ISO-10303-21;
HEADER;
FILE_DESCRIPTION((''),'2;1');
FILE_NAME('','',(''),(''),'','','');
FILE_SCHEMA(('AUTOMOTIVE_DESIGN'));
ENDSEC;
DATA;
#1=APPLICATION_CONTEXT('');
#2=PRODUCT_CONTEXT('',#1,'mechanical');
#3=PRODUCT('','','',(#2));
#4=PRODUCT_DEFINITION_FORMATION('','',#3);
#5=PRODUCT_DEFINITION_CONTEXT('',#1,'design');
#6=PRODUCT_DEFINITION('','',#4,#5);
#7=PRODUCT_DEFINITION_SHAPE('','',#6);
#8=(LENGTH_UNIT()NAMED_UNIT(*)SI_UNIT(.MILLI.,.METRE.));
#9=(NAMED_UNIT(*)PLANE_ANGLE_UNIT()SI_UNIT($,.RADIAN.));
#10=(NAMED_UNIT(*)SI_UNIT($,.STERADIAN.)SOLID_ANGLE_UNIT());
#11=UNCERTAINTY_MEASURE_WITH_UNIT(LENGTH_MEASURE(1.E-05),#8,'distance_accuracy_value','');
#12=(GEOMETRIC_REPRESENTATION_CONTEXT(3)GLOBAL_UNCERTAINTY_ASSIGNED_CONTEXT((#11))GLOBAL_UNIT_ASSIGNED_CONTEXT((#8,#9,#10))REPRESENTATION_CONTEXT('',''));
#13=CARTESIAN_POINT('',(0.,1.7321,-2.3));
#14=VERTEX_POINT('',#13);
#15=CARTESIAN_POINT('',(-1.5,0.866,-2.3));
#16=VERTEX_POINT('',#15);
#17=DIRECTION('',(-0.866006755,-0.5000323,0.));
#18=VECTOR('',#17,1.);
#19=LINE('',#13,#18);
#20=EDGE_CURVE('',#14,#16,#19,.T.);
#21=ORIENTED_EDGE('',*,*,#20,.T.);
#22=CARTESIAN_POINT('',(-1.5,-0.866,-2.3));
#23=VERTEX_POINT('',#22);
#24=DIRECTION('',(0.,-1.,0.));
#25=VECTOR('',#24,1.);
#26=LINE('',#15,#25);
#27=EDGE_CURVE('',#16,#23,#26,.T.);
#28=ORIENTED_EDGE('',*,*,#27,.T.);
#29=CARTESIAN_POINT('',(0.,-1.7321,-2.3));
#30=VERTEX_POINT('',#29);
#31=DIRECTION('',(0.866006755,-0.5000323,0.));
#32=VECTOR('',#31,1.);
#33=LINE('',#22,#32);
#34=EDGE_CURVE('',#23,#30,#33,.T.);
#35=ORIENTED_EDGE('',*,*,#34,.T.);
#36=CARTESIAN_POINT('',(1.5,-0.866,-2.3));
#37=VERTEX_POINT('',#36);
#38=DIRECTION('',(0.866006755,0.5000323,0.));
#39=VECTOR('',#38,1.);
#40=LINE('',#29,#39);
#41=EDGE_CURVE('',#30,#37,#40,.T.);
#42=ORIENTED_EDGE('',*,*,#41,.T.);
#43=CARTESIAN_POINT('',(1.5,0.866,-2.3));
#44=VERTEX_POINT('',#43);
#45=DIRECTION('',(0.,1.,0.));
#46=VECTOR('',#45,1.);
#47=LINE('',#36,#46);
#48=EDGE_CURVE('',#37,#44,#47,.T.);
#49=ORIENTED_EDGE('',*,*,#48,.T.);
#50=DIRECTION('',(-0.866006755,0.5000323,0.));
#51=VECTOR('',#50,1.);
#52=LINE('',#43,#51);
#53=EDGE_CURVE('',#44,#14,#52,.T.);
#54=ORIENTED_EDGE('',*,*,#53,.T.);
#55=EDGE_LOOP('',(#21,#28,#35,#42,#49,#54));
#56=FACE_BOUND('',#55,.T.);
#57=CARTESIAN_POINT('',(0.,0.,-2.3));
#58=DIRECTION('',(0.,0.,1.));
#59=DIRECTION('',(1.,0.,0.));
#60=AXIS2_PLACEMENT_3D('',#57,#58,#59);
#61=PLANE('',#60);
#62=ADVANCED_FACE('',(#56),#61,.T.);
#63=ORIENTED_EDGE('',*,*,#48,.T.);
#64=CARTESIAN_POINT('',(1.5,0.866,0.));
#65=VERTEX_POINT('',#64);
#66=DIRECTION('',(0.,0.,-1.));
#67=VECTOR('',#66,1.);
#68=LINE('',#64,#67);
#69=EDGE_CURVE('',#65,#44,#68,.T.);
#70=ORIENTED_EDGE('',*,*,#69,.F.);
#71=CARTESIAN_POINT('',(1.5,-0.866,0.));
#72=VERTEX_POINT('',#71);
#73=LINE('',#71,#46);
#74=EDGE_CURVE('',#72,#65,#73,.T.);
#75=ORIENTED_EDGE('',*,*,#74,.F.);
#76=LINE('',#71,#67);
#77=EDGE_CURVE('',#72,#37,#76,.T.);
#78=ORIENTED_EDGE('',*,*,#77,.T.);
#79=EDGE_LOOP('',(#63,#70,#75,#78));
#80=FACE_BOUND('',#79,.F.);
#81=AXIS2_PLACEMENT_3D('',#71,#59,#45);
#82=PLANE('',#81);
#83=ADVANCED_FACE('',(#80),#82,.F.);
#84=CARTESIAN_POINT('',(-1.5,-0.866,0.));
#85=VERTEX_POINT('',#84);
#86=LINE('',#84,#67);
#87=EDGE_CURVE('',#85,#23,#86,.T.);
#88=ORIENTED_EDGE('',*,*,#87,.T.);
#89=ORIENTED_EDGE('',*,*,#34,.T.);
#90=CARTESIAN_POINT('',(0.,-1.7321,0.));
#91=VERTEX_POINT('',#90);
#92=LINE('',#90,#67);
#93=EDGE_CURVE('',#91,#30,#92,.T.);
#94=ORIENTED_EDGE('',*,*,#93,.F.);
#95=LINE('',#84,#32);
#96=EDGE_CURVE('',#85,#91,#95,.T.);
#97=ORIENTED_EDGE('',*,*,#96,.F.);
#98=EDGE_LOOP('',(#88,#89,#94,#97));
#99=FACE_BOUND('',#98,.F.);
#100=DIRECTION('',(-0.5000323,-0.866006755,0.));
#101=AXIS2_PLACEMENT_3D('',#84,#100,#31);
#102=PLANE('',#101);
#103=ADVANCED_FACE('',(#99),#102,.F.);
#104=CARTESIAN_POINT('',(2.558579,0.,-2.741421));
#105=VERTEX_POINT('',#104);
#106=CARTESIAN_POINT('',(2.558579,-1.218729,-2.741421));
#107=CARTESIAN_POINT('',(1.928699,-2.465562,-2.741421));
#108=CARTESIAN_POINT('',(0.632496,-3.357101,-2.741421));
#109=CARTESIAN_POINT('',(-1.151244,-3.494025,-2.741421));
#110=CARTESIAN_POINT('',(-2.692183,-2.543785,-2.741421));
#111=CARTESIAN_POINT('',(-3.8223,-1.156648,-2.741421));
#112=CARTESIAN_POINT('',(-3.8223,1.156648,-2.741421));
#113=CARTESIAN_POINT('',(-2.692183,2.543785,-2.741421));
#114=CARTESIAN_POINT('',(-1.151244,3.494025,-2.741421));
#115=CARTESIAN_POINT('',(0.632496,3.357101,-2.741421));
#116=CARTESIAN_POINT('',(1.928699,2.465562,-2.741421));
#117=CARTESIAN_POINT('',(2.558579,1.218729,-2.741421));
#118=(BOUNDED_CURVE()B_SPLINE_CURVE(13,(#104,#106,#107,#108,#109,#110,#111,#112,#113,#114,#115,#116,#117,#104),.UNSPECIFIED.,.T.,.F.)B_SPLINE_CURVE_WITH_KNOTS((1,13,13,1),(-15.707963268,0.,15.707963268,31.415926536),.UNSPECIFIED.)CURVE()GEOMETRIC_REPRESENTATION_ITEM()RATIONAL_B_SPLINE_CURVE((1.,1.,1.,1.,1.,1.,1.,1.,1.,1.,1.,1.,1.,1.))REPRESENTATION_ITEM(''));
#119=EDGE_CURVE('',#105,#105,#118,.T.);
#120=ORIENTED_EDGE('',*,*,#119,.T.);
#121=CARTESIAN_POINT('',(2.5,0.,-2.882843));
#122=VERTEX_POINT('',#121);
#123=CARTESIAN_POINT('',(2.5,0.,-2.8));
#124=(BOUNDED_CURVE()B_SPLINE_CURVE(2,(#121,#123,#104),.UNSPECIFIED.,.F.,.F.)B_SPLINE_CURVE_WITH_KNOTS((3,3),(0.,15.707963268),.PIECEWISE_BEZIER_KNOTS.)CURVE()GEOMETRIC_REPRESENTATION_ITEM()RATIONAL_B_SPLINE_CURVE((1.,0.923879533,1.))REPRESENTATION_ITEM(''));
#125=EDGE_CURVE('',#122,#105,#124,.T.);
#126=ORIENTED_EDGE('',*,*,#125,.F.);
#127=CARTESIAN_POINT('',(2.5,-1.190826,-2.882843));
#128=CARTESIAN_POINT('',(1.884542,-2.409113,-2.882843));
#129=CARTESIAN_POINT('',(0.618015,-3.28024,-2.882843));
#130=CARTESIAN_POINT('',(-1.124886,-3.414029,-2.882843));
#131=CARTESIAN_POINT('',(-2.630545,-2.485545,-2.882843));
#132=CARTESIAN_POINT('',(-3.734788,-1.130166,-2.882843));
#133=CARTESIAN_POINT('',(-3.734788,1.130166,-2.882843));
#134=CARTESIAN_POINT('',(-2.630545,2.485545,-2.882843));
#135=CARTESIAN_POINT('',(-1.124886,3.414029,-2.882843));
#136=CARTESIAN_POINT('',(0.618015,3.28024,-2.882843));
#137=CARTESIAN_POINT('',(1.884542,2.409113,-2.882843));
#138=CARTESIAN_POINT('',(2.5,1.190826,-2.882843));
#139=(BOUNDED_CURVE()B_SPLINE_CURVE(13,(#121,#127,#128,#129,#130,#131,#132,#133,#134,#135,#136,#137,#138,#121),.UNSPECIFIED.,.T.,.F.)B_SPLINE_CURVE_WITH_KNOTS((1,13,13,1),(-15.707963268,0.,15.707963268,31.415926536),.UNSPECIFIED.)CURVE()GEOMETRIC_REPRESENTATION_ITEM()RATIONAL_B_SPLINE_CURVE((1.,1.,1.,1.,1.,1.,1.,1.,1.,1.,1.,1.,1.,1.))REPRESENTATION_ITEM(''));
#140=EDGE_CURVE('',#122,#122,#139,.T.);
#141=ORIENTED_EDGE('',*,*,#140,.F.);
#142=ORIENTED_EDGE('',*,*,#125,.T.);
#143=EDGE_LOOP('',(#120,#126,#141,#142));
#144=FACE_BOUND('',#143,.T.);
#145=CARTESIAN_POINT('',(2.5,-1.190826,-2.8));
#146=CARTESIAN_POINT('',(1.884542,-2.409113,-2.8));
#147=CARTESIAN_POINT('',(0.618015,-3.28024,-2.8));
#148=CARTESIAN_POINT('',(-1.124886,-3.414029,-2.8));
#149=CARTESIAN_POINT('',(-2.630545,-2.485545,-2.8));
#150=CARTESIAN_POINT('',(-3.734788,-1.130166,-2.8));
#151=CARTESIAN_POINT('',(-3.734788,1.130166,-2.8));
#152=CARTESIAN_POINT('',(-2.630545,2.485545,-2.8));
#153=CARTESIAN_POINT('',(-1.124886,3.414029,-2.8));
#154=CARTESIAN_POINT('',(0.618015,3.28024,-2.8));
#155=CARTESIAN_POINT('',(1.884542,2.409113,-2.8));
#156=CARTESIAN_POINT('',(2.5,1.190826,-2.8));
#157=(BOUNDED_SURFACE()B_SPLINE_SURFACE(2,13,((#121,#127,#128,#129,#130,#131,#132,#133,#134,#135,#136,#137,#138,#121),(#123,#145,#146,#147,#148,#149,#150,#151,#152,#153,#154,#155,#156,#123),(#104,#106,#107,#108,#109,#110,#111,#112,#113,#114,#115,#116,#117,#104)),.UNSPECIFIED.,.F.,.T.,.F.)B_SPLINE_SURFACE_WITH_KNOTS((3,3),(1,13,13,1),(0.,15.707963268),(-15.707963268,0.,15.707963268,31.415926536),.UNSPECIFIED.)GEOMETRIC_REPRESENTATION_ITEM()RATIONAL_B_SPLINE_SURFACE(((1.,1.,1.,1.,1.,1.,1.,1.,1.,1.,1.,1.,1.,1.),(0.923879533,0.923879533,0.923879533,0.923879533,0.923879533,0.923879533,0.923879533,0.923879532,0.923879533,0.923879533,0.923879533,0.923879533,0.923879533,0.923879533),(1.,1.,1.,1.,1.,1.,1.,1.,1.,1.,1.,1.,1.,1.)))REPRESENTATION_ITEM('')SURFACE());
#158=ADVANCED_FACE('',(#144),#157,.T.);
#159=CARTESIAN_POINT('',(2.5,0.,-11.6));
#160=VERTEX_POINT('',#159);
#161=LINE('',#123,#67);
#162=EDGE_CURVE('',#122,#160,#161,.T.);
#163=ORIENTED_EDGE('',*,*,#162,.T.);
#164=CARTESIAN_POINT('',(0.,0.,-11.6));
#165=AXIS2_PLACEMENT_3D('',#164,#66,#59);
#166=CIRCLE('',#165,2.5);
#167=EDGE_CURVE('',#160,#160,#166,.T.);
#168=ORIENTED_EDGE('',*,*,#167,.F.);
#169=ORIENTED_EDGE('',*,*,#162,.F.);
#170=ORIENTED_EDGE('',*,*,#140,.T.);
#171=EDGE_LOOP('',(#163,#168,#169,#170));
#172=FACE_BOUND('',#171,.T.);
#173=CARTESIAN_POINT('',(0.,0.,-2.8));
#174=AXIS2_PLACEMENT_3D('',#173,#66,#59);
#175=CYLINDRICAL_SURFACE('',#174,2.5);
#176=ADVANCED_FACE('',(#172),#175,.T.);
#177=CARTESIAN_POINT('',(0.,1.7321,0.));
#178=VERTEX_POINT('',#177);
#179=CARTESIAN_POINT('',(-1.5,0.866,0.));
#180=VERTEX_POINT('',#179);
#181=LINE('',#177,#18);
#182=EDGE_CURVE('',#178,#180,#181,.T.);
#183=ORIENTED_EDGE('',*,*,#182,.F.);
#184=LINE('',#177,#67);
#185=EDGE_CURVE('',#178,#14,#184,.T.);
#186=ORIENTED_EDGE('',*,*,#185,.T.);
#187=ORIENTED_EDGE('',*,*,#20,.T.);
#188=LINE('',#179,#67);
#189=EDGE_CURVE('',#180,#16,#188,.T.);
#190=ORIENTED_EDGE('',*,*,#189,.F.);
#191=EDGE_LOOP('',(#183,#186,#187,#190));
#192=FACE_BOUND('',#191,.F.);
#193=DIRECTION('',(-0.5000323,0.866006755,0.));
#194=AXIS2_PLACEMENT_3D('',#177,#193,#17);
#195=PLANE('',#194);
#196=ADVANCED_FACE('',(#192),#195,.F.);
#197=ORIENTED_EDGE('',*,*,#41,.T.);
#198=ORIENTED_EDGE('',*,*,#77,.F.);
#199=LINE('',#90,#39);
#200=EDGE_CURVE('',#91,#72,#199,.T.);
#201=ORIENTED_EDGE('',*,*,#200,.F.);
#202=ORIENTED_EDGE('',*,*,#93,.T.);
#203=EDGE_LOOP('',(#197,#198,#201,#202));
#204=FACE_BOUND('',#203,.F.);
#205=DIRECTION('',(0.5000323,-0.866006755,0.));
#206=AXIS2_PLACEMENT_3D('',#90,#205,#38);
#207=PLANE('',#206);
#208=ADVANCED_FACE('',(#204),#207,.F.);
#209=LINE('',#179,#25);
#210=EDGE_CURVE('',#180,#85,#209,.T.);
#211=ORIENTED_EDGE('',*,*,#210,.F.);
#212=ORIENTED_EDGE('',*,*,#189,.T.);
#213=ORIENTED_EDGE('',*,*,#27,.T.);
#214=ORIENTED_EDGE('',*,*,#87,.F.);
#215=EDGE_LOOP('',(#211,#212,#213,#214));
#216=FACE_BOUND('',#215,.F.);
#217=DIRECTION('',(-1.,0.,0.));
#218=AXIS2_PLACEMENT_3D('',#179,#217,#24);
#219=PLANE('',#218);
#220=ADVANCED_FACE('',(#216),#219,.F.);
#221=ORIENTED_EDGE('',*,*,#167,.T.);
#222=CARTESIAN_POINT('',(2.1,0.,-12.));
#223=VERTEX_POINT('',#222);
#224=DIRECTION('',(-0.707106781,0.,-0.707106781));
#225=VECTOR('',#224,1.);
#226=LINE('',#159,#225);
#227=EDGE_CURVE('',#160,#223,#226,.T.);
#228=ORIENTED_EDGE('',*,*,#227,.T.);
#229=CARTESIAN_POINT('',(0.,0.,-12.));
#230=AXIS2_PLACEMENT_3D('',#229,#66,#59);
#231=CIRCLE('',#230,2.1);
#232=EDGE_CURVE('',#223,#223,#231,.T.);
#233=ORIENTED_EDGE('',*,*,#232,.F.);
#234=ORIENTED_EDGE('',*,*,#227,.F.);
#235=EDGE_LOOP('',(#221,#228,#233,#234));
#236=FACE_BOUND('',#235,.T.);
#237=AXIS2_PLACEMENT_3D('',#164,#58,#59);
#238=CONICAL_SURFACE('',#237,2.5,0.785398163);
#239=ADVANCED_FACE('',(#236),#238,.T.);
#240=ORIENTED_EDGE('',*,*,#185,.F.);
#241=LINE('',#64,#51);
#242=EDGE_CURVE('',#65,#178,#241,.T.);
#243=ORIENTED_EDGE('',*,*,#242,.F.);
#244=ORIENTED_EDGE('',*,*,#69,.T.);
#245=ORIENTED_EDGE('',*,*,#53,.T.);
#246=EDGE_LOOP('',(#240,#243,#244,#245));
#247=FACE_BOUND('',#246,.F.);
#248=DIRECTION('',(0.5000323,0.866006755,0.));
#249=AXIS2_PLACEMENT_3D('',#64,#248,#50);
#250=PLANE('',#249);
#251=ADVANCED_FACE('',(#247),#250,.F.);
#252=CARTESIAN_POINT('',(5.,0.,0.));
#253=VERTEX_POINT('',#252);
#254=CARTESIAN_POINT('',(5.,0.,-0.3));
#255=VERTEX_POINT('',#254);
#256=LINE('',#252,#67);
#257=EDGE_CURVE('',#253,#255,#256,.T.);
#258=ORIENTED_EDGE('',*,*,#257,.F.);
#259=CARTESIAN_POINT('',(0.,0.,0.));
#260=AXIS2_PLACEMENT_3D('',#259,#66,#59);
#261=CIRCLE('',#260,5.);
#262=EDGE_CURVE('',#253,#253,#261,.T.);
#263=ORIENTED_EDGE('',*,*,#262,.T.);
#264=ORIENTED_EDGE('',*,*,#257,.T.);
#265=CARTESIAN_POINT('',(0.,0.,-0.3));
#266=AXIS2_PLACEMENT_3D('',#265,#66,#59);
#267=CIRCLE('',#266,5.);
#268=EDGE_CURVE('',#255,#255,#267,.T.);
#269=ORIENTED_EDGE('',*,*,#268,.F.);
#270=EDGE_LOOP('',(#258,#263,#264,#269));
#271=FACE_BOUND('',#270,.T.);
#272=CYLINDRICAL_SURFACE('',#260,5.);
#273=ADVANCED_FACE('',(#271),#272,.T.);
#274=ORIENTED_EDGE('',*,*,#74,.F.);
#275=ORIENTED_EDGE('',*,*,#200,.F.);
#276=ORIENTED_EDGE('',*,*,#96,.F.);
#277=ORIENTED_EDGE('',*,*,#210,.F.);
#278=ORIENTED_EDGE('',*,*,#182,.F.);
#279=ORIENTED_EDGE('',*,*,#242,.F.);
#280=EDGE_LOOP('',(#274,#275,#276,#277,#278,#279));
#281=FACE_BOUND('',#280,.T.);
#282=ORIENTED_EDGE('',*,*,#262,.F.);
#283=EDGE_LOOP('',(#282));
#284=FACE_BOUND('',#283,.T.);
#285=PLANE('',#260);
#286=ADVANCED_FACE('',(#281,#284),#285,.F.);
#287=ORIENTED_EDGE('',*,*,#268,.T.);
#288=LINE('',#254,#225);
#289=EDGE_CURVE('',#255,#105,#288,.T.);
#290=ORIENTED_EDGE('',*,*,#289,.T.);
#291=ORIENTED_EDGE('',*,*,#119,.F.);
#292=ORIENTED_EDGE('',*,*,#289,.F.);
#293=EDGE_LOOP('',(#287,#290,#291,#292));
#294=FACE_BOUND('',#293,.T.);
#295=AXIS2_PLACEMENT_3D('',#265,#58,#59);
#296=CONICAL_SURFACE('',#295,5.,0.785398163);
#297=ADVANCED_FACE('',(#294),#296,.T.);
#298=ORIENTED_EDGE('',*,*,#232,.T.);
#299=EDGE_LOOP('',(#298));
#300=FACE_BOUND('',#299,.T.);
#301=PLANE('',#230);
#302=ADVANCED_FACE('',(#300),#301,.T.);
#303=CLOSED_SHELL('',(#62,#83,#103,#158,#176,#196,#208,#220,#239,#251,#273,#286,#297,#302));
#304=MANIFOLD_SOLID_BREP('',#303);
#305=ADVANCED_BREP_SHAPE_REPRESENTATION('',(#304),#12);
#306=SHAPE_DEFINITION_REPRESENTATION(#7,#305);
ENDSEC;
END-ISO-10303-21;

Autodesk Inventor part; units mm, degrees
ref_plane "YZ Plane" through (0, 0, 0) normal (1, 0, 0) x (0, 1, 0)
sketch "Skizze1" plane through (0, 0, 0) normal (0, 1, 0) x (-1, 0, 0)
  point P0 (0, 0)
sketch "Skizze2" plane through (0, 0, 0) normal (0, 1, 0) x (-1, 0, 0)
  line L0 (-2.5, -12) -> (0, -12)
  line L1 (-2.5, -2.8) -> (-2.5, -12)
  line L2 (-5, -0.3) -> (-2.5, -2.8)
  line L3 (-5, 0) -> (-5, -0.3)
  line L4 (0, 0) -> (-5, 0)
  line L5 (0, -12) -> (0, 0)
  line L6 (0, -12) -> (0, 0)
  line L7 (0, -14.4) -> (0, 2.4) projected
  line L8 (1, 0) -> (-6, 0) projected
  dimension "d3" = 5
  dimension "d5" = 2.5
  dimension "d7" = 12
  dimension "ParC" = 0.3
  dimension "d22" = 0
  dimension "d23" = 0
  dimension "d43" = 45
revolve "Drehung1" add sketch "Skizze2" angle 360 about axis through (0, 0, -12) along (0, 0, -1)
sketch "Skizze3" plane through (0, 0, 0) normal (0, 0, 1) x (1, 0, 0)
  line L0 (-1.5, 0.866) -> (-1.5, -0.866)
  line L1 (0, 1.7321) -> (-1.5, 0.866)
  line L2 (1.5, 0.866) -> (0, 1.7321)
  line L3 (1.5, -0.866) -> (1.5, 0.866)
  line L4 (0, -1.7321) -> (1.5, -0.866)
  line L5 (-1.5, -0.866) -> (0, -1.7321)
  circle A0 centre (0, 0) radius 1.5 construction
  circle A1 centre (0, 0) radius 2.5 construction
  dimension "d11" = 3
  dimension "d13" = 120
  dimension "d15" = 120
extrude "Extrusion1" cut sketch "Skizze3" against normal blind 2.3
fillet "Rundung1" radius 0.2 1 edges at (-2.5, 0, -2.8)
chamfer "Fase1" distance 0.4 angle 45 1 edges at (-2.5, 0, -12) measured on face at (-0.599, -2.4272, -8.9609)
thread "Gewinde1" size "M5x0.8" class "6g" standard "ISO Metric profile" length 7.6
ref_plane "MSC_PF1" through (0, 0, 0) normal (1, 0, 0) x (0, 1, 0)
ref_plane "MSC_PT1" through (0, 0, 0) normal (0, 0, -1) x (-1, 0, 0)
equation "\"d19\" = 0.5 * PTC"
equation "\"d39\" = 0.5 * PTC"
equation "\"d3\" = 0.5 * dk"
equation "\"d5\" = 0.5 * NND"
equation "\"d7\" = NLG"
equation "\"d43\" = 0.5 * ang"
equation "\"d11\" = ParS"
equation "\"d16\" = ParT"
equation "\"d18\" = r"
equation "\"NND\" = 5"
equation "\"PTC\" = 0.8"
equation "\"ParK\" = 2.8"
equation "\"ParS\" = 3"
equation "\"ParT\" = 2.3"
equation "\"r\" = 0.2"
equation "\"NLG\" = 12"
equation "\"ang\" = 90deg"
equation "\"THREADDIA\" = NND"
equation "\"dk\" = 10"
properties part number "DIN 7991 - M5x12" material "Stahl, weich"
